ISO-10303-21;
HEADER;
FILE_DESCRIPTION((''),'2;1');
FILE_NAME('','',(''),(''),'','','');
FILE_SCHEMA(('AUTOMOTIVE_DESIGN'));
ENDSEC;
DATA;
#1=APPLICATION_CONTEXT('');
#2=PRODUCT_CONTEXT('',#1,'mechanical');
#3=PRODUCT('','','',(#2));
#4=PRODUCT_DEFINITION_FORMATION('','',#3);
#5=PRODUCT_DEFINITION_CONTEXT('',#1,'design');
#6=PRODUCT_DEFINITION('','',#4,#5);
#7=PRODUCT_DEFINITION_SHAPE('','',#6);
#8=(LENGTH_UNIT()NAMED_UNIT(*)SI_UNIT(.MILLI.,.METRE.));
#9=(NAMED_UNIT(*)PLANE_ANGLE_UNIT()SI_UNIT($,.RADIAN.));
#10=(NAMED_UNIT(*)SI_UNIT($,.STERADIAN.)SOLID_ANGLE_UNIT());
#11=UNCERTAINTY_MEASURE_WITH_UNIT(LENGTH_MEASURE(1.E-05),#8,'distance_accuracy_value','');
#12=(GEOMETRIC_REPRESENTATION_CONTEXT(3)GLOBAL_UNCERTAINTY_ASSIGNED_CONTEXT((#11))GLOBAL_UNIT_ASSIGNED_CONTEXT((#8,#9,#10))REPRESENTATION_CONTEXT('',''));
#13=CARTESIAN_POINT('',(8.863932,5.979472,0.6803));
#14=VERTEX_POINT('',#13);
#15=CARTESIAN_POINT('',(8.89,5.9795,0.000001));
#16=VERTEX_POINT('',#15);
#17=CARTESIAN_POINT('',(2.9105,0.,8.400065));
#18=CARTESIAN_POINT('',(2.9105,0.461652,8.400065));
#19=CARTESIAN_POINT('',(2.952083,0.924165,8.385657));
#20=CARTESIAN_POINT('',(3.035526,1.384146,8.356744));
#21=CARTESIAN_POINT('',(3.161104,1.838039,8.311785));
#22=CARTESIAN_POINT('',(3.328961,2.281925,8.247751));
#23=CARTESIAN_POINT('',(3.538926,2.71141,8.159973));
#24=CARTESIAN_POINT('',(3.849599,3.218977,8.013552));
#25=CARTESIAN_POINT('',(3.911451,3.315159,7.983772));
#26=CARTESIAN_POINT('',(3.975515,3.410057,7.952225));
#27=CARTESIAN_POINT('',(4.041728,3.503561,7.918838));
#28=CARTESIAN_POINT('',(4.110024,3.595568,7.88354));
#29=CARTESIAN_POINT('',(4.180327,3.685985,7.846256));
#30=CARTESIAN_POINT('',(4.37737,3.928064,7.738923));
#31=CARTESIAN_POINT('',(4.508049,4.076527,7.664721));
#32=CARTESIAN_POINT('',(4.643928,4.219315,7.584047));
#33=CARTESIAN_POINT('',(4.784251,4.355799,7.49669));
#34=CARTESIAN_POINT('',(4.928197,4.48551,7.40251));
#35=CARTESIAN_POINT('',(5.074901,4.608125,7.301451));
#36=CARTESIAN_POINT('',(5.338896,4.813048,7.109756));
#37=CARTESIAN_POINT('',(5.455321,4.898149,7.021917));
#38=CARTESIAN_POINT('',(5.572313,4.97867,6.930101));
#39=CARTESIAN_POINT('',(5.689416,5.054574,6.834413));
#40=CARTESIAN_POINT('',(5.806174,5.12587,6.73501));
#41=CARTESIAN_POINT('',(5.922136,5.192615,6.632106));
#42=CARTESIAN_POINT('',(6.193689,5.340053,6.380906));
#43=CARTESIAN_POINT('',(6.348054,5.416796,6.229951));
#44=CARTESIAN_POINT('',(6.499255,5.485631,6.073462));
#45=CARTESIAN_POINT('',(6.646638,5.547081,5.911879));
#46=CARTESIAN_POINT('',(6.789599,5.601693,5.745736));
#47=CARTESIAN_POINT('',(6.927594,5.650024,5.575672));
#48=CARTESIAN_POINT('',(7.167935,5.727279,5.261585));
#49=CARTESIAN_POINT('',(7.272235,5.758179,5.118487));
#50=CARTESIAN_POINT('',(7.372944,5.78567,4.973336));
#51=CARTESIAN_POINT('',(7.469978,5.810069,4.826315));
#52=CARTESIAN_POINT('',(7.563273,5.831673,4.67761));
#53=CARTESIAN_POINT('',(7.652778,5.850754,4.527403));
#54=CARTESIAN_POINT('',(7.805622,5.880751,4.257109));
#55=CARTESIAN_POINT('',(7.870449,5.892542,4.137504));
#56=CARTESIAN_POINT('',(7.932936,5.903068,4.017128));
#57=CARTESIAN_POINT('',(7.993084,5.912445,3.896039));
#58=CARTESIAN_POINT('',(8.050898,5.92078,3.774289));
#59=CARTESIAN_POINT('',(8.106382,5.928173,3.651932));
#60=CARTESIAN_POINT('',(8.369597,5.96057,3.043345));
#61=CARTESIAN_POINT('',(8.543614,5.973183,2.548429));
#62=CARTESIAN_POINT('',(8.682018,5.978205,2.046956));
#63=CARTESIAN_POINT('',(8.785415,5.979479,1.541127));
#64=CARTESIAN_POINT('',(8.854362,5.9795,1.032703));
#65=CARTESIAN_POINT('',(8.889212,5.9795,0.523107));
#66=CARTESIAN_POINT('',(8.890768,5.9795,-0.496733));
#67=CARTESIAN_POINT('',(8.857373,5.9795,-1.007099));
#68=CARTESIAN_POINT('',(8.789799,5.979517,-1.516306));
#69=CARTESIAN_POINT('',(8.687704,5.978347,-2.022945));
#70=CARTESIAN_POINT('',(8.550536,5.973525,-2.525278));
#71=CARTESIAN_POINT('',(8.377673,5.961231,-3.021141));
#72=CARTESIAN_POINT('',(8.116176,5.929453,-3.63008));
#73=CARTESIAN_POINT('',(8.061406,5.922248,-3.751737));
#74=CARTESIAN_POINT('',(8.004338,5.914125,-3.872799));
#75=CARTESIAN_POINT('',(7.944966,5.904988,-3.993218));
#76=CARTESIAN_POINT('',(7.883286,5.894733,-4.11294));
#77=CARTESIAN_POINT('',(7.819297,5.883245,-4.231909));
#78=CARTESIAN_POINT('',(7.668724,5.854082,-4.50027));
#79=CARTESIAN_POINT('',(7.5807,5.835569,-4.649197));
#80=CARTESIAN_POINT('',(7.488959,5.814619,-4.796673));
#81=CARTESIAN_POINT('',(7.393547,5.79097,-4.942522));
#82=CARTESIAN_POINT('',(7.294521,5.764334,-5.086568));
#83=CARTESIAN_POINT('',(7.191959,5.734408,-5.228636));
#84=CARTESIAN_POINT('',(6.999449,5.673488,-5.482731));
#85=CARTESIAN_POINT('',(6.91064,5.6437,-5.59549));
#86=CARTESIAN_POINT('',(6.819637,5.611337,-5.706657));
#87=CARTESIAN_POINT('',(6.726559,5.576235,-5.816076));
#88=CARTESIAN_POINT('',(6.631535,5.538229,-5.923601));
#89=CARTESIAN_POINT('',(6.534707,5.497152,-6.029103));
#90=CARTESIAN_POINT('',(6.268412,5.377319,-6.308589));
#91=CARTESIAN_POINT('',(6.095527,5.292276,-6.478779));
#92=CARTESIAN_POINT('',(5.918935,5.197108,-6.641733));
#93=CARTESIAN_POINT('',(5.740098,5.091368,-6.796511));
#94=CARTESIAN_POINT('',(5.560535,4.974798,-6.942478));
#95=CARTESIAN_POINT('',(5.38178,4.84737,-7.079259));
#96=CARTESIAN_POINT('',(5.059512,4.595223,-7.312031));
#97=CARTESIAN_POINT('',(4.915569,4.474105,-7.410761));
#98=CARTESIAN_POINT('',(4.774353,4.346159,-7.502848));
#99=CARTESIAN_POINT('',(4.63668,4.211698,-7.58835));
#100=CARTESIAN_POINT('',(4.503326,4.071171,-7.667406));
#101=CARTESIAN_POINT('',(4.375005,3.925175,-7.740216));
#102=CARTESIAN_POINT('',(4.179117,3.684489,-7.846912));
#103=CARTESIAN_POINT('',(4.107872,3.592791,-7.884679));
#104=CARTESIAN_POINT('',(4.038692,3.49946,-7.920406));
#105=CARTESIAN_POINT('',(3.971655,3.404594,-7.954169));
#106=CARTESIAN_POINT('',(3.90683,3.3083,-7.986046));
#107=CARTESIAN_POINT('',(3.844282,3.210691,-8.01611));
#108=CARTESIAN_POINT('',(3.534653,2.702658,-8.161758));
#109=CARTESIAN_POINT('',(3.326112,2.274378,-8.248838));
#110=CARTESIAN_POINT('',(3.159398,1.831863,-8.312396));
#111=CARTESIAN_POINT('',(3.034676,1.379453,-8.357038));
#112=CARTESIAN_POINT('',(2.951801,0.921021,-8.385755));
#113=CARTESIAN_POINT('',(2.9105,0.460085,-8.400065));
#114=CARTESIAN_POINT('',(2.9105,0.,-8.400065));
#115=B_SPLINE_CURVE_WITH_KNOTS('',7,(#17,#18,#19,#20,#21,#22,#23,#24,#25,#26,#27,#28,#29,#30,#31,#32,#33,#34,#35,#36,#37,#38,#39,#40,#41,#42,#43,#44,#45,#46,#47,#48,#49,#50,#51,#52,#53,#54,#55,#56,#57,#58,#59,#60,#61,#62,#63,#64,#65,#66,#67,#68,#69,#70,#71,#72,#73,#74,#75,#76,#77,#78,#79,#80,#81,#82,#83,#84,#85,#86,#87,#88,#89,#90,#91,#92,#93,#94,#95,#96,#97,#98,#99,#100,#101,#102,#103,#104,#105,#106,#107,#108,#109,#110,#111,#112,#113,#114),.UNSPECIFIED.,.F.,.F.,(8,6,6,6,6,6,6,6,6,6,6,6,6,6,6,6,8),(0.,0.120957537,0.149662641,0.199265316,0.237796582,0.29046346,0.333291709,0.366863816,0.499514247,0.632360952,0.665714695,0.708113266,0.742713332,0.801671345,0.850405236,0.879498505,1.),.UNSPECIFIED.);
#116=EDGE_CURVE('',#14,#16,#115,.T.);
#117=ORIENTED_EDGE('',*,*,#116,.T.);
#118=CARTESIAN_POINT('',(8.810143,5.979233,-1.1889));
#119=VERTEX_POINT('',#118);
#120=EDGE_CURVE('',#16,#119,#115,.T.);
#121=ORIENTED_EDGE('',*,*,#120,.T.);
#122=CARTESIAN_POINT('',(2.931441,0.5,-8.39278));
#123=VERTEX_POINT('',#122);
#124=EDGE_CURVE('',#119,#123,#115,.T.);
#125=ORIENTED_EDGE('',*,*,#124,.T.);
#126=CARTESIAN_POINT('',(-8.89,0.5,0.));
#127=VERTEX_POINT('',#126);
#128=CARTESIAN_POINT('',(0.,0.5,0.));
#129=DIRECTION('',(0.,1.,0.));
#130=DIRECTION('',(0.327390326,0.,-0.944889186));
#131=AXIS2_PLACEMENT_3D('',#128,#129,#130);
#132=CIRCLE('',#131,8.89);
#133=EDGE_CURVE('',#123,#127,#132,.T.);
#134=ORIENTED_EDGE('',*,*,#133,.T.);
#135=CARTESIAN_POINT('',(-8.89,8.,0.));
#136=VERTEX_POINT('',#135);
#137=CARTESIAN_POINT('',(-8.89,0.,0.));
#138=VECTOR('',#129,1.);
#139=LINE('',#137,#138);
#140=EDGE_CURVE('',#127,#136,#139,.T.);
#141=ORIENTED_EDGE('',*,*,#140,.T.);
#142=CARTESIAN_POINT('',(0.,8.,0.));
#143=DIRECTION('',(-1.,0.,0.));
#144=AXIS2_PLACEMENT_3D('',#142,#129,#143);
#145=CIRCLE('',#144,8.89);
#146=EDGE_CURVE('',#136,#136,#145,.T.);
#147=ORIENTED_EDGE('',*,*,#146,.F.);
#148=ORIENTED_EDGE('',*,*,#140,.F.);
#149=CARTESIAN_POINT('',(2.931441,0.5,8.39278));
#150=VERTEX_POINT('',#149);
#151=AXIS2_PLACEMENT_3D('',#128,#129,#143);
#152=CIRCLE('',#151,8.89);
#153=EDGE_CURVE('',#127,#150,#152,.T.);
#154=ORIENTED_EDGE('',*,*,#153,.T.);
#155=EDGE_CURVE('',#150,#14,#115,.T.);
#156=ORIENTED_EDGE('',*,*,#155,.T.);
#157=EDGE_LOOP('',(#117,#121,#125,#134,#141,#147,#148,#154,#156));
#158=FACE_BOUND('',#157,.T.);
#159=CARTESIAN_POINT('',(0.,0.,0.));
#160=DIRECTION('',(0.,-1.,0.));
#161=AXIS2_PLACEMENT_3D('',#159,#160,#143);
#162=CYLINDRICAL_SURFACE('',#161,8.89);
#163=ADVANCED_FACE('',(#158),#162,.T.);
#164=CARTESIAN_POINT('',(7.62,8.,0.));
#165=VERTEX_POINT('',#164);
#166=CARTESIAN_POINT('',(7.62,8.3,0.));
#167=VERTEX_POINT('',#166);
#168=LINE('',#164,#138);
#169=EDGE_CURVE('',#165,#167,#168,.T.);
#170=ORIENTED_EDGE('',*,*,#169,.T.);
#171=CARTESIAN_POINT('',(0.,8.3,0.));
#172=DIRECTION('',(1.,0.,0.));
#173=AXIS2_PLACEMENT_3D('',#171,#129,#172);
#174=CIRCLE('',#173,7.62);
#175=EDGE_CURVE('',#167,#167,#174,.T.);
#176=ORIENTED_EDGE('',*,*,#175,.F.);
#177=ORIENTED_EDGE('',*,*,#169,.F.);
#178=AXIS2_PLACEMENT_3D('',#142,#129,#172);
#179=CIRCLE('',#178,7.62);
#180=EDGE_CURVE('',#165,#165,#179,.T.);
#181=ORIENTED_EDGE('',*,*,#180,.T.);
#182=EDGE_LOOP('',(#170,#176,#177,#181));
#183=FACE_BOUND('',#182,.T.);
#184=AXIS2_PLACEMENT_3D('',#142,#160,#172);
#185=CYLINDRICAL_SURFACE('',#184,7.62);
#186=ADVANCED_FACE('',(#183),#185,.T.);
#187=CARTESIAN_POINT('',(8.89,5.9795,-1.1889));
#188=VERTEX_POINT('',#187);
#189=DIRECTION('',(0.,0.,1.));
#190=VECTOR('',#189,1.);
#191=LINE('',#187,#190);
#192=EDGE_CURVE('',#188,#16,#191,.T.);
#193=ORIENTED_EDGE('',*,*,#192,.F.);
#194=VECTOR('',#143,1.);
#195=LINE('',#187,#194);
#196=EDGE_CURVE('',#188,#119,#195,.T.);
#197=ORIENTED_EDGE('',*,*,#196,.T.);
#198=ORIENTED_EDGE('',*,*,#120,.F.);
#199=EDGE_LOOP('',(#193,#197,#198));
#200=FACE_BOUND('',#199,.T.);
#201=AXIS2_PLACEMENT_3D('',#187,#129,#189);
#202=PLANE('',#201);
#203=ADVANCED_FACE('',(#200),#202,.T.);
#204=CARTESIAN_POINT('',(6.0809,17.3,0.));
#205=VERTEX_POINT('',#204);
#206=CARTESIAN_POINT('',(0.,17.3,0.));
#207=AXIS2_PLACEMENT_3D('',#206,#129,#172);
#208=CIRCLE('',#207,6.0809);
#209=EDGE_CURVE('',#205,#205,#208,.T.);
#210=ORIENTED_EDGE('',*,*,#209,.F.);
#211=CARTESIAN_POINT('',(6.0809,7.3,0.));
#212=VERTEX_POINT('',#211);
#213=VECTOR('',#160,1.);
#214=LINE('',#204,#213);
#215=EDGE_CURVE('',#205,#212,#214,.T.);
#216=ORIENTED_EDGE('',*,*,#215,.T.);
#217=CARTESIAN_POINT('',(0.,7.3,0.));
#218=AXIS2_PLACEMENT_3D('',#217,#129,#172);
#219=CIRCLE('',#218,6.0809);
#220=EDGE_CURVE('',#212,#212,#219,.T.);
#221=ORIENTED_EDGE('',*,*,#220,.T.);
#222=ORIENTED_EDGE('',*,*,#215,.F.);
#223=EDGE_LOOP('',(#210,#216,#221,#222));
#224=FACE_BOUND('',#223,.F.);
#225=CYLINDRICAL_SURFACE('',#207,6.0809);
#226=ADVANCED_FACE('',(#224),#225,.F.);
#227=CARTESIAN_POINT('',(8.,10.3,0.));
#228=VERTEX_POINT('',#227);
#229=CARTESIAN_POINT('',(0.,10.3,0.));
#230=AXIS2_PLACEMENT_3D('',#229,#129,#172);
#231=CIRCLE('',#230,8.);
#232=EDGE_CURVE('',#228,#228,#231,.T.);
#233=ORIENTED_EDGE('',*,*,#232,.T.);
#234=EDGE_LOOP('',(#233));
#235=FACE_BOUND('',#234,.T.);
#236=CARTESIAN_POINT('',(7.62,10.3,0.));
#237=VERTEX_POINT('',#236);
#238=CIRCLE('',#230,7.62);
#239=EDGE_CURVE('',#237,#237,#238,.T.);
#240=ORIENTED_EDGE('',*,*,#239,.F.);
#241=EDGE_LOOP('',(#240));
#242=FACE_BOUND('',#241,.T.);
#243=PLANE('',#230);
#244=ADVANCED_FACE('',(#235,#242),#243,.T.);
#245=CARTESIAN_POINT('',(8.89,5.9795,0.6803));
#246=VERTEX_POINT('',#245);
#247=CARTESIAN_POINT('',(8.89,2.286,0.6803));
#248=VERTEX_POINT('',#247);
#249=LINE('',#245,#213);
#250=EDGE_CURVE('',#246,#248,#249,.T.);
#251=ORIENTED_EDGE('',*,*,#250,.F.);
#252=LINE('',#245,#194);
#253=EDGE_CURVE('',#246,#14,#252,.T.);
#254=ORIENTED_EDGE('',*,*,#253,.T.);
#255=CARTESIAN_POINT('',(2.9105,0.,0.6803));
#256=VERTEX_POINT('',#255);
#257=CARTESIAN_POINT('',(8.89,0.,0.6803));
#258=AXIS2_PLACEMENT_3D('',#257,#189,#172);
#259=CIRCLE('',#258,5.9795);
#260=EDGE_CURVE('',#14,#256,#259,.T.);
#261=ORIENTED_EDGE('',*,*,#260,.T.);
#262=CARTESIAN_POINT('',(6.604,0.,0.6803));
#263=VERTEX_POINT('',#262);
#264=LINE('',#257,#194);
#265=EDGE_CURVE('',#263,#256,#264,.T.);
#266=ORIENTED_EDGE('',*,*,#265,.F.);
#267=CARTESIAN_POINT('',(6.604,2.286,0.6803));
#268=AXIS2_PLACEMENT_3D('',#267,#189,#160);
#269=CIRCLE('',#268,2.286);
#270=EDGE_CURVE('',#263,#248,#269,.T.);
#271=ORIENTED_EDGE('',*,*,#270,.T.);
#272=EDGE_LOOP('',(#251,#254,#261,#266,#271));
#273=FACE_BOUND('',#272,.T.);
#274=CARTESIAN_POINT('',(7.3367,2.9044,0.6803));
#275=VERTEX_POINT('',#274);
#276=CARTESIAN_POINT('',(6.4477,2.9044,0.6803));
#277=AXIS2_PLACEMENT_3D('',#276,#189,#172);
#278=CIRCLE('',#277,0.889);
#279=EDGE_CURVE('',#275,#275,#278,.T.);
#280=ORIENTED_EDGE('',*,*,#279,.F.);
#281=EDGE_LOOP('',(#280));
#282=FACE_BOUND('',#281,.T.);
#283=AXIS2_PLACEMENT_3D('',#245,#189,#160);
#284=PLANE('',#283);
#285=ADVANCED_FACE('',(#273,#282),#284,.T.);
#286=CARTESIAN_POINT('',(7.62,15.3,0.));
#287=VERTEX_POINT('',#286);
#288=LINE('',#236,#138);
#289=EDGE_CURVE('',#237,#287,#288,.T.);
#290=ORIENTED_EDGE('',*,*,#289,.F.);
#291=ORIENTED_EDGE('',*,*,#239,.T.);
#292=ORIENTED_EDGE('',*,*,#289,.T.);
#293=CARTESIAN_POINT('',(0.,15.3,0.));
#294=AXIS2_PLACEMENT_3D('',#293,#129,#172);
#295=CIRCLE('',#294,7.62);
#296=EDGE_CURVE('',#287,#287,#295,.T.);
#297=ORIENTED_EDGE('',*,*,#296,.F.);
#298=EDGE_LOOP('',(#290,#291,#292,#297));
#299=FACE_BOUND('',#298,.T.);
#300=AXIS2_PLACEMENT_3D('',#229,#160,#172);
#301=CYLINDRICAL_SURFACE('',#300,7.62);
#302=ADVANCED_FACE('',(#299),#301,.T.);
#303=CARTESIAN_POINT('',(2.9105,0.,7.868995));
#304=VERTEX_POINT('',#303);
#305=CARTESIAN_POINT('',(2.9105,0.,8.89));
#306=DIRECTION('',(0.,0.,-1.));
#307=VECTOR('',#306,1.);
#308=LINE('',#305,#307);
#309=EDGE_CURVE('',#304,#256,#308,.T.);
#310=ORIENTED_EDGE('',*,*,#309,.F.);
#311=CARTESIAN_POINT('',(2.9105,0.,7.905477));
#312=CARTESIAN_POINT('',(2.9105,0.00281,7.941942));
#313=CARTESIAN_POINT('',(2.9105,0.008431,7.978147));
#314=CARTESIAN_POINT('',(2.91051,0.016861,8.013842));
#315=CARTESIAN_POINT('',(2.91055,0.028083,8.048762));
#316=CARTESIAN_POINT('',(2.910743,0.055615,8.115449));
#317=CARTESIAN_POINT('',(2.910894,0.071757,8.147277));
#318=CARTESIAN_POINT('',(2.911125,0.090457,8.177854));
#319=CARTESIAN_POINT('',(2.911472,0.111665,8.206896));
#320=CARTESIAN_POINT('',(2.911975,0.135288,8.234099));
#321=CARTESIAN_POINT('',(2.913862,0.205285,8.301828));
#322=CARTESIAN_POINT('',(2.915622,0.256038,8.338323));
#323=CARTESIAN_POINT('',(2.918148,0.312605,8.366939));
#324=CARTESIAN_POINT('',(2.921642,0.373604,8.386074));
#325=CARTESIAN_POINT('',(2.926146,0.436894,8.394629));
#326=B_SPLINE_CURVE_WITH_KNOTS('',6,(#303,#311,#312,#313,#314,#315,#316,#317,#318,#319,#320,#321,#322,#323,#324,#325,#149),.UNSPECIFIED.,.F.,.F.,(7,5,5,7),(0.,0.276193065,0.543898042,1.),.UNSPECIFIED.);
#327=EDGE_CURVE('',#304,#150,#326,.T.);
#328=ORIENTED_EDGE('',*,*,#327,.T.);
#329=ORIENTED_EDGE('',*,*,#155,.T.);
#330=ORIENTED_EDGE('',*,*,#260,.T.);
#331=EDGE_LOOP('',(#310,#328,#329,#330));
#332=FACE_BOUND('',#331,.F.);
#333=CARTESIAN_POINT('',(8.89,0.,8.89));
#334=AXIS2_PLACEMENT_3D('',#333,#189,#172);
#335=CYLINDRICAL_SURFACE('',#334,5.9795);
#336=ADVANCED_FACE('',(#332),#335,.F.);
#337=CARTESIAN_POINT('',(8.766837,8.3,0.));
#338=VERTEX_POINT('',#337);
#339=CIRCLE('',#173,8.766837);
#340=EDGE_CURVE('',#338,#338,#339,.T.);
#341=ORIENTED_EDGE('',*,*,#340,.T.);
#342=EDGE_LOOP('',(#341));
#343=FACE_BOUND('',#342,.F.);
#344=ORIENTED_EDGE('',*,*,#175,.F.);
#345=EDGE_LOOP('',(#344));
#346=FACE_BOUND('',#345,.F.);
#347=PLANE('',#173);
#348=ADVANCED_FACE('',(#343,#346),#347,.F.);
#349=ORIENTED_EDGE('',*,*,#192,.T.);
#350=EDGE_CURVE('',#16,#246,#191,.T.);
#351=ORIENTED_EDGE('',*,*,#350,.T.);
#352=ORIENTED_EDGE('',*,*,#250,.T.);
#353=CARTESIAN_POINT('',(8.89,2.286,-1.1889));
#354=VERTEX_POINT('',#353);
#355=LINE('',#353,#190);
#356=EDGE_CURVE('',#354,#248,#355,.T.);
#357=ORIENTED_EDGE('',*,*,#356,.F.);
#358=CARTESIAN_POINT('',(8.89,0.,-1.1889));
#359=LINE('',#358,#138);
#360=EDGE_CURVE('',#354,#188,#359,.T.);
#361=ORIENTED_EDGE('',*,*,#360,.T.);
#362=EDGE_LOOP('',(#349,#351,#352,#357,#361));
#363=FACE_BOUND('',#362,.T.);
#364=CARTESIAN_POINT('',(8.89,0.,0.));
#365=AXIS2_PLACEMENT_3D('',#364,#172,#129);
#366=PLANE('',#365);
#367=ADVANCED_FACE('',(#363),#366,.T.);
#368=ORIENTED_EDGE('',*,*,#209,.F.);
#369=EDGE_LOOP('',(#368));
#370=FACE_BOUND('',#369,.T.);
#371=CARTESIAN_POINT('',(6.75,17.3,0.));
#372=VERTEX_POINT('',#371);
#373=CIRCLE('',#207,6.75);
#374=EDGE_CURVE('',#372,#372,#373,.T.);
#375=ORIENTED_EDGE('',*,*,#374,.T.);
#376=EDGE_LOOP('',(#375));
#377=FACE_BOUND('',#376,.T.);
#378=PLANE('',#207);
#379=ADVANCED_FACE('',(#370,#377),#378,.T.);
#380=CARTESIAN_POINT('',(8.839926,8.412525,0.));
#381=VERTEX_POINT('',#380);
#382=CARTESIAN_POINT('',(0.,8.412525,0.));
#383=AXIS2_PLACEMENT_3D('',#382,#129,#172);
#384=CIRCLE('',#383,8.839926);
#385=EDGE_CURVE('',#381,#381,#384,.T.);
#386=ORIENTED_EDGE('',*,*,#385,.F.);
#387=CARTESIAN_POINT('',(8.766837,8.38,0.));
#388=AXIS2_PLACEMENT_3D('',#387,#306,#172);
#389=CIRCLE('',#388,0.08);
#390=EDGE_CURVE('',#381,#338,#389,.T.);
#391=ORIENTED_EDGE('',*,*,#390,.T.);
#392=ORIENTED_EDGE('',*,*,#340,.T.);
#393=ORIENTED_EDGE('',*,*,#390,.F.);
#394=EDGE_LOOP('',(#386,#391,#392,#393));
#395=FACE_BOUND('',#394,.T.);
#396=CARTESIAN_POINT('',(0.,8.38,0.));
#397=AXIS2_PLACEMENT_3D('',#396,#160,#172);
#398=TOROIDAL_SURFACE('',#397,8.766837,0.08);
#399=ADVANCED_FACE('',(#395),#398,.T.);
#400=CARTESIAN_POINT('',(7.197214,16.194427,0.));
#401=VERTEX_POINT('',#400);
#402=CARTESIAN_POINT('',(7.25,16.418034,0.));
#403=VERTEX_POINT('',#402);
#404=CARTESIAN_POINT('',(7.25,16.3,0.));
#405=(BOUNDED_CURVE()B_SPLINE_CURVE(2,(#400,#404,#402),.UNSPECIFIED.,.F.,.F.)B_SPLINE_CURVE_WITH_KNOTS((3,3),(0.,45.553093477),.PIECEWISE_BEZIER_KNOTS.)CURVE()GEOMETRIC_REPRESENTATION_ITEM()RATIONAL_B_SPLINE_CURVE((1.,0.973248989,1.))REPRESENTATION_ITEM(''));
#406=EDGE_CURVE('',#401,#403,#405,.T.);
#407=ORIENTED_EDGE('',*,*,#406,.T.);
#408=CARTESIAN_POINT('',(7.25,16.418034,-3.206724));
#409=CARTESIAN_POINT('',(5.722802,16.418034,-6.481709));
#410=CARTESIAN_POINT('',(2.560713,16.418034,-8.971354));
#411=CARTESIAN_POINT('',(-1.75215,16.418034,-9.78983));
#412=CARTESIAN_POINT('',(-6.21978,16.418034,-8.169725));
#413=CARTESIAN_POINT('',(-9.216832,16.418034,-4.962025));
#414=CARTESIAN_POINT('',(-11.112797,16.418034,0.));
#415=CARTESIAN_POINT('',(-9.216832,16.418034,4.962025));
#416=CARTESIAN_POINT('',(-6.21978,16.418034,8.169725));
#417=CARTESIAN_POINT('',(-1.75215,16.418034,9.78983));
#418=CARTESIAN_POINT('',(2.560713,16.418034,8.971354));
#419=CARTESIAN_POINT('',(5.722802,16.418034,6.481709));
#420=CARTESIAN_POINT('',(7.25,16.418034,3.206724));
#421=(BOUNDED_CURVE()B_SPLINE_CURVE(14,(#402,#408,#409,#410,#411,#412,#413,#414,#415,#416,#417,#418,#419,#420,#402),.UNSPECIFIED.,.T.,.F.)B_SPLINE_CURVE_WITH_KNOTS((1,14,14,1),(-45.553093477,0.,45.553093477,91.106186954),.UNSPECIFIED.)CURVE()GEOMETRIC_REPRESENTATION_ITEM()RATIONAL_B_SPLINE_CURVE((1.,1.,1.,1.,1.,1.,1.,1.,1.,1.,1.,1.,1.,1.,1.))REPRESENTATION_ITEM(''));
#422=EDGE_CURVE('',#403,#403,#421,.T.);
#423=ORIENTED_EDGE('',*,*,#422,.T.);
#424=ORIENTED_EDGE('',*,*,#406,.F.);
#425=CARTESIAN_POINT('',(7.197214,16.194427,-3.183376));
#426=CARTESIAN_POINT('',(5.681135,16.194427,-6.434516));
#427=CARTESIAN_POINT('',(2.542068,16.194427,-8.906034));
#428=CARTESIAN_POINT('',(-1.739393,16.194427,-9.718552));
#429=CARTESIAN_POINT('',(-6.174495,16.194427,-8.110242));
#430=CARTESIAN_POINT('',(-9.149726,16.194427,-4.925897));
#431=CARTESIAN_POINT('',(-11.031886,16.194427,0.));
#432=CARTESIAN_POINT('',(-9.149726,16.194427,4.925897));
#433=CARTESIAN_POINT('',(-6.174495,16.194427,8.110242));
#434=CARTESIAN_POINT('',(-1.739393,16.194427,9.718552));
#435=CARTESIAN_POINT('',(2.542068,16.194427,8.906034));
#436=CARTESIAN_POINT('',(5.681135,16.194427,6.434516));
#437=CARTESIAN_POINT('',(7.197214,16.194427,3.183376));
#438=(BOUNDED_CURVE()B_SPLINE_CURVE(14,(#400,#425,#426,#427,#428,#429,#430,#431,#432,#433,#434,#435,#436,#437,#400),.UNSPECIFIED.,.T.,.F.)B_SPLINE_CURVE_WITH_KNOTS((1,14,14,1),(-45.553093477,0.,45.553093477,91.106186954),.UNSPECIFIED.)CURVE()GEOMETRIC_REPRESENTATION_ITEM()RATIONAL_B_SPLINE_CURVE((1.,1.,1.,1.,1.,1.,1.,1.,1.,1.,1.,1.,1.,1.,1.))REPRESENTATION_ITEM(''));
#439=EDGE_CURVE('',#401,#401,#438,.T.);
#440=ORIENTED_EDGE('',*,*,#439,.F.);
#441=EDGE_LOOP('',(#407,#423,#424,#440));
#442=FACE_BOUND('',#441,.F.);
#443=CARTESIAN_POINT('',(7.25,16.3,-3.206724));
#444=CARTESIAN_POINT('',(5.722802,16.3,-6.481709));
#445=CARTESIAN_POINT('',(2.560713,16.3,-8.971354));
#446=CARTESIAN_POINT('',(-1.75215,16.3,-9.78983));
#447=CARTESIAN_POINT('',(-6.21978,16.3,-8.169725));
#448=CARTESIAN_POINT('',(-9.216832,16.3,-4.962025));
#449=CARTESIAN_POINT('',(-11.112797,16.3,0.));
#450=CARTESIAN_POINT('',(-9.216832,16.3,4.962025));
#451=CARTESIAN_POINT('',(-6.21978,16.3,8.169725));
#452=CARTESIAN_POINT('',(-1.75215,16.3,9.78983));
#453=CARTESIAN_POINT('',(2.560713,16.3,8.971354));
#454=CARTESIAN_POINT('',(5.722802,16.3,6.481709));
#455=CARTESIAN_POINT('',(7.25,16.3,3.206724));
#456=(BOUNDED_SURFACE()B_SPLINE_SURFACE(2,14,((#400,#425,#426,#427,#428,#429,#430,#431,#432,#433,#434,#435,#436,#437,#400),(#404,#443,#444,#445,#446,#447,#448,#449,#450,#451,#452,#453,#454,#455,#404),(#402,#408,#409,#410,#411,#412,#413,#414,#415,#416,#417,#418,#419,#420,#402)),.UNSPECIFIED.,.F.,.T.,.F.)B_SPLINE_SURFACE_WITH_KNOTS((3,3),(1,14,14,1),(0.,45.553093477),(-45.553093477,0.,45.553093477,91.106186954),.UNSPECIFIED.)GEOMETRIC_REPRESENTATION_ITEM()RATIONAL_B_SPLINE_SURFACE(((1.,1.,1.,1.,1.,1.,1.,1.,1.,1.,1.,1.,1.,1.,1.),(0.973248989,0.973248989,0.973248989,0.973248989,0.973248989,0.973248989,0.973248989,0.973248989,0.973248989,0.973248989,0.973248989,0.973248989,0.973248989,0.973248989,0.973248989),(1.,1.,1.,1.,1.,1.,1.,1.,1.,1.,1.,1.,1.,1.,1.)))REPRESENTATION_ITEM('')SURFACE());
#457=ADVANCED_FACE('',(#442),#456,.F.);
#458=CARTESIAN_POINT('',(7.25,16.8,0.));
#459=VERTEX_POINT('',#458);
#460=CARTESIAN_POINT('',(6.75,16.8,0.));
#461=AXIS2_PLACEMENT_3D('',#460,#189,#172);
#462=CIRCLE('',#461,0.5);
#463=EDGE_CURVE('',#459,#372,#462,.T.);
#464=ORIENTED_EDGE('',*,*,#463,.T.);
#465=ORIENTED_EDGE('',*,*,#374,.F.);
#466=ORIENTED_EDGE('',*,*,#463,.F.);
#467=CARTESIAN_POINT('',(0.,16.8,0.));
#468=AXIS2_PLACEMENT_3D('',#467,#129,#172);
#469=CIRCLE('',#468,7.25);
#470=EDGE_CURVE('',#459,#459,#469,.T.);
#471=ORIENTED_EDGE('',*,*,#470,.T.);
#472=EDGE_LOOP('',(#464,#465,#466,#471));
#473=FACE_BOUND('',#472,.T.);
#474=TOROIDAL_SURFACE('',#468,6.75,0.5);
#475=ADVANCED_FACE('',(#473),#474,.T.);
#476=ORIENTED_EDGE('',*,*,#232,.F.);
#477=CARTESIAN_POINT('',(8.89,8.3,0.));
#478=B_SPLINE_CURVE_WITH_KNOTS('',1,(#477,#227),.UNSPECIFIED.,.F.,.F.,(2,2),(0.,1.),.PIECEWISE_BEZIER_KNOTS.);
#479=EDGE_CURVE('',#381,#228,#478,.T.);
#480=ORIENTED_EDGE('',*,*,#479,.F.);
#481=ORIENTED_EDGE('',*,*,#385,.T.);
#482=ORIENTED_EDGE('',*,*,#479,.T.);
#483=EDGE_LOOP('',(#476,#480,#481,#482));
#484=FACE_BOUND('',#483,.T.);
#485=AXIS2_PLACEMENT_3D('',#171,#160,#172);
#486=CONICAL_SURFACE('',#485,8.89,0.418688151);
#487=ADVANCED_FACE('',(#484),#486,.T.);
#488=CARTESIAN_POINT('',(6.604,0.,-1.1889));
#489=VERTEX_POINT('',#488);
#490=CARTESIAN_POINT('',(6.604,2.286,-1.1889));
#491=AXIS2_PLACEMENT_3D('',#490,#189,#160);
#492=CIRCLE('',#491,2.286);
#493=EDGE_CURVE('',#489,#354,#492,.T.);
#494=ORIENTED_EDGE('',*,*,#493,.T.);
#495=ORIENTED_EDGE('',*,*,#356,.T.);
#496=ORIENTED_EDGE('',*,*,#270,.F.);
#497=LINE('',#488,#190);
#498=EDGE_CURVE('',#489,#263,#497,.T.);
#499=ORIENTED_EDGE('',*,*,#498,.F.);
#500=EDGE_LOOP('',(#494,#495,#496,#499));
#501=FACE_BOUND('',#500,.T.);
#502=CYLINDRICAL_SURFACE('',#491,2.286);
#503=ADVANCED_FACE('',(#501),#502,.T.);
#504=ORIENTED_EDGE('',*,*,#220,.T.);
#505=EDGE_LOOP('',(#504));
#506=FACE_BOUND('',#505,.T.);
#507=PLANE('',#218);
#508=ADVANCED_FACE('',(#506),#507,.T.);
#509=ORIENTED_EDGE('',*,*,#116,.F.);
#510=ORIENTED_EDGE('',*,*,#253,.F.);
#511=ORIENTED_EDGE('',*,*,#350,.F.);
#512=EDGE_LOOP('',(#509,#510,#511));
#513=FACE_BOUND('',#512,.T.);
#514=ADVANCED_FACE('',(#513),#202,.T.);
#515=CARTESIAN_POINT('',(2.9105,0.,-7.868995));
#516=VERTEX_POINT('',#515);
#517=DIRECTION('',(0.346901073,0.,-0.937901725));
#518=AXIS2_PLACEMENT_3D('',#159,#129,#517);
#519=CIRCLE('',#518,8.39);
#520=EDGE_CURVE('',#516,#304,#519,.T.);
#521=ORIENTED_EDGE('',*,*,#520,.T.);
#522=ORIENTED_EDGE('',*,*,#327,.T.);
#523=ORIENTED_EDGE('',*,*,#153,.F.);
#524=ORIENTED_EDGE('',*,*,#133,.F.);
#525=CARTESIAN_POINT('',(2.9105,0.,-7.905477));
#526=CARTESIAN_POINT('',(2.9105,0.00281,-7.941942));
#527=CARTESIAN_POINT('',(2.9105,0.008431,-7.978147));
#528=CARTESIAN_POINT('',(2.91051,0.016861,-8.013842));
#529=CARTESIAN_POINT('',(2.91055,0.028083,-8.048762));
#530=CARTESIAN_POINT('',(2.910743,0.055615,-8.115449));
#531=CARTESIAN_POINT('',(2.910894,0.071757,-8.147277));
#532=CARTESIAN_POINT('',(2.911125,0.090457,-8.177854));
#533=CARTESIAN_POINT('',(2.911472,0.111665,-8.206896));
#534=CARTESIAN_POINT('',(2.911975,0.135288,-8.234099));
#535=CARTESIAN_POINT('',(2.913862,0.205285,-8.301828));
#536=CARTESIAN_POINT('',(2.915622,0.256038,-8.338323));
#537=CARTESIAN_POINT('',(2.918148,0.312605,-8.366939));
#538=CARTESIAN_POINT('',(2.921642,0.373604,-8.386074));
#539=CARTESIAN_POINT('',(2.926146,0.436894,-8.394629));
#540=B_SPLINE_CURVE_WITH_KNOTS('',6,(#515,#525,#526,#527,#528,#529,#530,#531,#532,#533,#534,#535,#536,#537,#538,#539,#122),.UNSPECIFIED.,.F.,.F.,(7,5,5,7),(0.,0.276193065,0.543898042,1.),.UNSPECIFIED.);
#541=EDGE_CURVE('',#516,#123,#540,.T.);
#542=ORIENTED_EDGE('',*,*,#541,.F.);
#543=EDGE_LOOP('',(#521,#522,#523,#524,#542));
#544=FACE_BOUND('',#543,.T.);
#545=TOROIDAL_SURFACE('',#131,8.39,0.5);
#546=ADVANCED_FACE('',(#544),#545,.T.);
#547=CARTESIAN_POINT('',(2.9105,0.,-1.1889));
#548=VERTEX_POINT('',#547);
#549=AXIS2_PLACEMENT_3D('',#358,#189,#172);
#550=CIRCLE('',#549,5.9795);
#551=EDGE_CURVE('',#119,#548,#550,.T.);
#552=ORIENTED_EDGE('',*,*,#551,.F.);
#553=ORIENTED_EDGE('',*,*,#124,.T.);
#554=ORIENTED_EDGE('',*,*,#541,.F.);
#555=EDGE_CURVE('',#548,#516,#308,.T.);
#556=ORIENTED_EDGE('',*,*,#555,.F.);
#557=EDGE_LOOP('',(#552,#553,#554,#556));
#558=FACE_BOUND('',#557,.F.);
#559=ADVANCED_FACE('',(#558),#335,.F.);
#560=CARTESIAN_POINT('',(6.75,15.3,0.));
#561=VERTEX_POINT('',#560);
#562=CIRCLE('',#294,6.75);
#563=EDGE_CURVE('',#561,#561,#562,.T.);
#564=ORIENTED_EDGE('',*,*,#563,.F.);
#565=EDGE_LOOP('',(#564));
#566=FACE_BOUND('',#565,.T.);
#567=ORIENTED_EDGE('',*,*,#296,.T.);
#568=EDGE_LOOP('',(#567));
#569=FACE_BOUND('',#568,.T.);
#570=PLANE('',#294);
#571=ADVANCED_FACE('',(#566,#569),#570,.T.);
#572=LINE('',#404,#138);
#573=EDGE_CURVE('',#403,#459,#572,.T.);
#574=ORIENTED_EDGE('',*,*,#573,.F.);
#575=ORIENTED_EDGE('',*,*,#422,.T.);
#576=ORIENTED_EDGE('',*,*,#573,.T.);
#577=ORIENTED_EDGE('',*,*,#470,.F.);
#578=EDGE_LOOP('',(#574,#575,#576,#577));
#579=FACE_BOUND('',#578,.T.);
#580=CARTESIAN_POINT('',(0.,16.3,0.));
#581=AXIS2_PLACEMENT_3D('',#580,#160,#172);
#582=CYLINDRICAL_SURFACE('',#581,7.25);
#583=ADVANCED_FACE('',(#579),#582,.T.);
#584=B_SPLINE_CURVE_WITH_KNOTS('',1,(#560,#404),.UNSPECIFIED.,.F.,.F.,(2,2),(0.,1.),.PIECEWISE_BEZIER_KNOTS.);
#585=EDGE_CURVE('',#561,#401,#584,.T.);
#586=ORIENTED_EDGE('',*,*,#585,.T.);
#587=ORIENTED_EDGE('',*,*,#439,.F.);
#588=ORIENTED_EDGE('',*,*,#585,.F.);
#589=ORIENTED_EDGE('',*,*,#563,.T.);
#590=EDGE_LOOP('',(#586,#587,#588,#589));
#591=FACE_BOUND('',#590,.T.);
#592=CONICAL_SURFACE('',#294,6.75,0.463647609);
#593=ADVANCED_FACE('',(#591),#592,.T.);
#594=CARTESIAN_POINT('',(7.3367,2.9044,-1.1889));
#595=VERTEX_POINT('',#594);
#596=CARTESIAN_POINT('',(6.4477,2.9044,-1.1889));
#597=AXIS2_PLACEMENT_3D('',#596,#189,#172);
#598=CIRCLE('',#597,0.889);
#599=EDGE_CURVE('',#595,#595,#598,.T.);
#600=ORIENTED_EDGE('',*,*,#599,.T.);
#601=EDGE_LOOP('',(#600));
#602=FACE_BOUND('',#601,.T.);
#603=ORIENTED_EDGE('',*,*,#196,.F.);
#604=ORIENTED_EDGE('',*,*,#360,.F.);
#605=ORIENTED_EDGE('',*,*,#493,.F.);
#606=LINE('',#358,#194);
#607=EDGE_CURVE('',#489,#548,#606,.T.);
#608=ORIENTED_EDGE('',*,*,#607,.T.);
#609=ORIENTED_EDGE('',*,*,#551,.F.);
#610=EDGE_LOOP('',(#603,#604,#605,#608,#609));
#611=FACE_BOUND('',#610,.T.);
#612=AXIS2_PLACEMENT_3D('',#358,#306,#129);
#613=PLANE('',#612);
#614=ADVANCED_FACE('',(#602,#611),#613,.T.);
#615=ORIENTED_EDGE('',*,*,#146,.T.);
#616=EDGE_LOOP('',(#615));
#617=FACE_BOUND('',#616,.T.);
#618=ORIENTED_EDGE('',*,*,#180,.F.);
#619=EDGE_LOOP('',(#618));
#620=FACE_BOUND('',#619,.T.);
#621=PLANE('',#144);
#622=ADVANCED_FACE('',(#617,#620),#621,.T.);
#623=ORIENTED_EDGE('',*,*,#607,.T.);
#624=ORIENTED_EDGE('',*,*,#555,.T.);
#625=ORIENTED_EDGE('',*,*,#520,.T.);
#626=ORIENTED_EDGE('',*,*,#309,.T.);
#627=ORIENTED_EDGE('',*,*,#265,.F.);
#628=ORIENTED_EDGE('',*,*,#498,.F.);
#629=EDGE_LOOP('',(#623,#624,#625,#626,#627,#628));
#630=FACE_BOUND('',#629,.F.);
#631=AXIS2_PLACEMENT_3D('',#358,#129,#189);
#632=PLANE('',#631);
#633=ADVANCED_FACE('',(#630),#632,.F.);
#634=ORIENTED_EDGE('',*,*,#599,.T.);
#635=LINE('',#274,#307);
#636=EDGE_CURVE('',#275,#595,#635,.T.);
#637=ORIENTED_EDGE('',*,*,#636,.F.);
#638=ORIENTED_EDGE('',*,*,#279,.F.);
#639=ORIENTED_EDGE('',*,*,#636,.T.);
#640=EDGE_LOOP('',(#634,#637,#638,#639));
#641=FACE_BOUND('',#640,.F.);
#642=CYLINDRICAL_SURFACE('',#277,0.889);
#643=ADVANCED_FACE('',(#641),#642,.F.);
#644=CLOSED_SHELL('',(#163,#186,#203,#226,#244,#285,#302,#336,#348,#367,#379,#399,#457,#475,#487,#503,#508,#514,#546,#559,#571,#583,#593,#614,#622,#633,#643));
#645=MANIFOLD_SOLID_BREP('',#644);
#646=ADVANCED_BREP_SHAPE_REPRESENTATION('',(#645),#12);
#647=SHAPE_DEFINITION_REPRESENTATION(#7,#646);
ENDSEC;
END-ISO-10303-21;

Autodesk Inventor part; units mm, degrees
sketch "Sketch1" plane through (0, 0, 0) normal (0, 1, 0) x (-1, 0, 0)
  circle A0 centre (0, 0) radius 8.89
  dimension "d0" = 17.78
extrude "Extrusion1" add sketch "Sketch1" along normal blind 8
sketch "Sketch2" plane through (0, 8, 0) normal (0, 1, 0) x (1, 0, 0)
  circle A0 centre (0, 0) radius 7.62
  dimension "d3" = 15.24
extrude "Extrusion2" add sketch "Sketch2" along normal blind 0.3
ref_plane "Work Plane1" through (0, 10.3, 0) normal (0, 1, 0) x (1, 0, 0)
sketch "Sketch4" plane through (0, 10.3, 0) normal (0, 1, 0) x (1, 0, 0)
  circle A0 centre (0, 0) radius 8
  dimension "d7" = 16
sketch "Sketch5" plane through (0, 8.3, 0) normal (0, 1, 0) x (1, 0, 0)
  circle A0 centre (0, 0) radius 8.89
  dimension "d8" = 17.78
loft "Loft1" add profiles "Sketch5", "Sketch4"
sketch "Sketch6" plane through (0, 10.3, 0) normal (0, 1, 0) x (1, 0, 0)
  circle A0 centre (0, 0) radius 7.62
  dimension "d13" = 15.24
extrude "Extrusion3" add sketch "Sketch6" along normal blind 5
sketch "Sketch7" plane through (0, 15.3, 0) normal (0, 1, 0) x (1, 0, 0)
  circle A0 centre (0, 0) radius 6.75
  dimension "d16" = 13.5
ref_plane "Work Plane2" through (0, 16.3, 0) normal (0, 1, 0) x (1, 0, 0)
sketch "Sketch8" plane through (0, 16.3, 0) normal (0, 1, 0) x (1, 0, 0)
  circle A0 centre (0, 0) radius 7.25
  dimension "d18" = 14.5
loft "Loft2" add profiles "Sketch7", "Sketch8"
fillet "Fillet1" radius 0.08 1 edges at (-8.89, 8.3, 0)
thread "Thread1" size "0.390-27 UNS" class "2A" standard "ANSI Unified Screw Threads" length 8.001
sketch "Sketch9" plane through (0, 16.3, 0) normal (0, 1, 0) x (1, 0, 0)
  circle A0 centre (0, 0) radius 7.25
extrude "Extrusion4" add sketch "Sketch9" along normal blind 1
ref_plane "Work Plane3" through (0, 0, 8.89) normal (0, 0, 1) x (1, 0, 0)
sketch "Sketch10" plane through (0, 0, 8.89) normal (0, 0, 1) x (1, 0, 0)
  line L0 (8.89, 0) -> (-8.89, 0) projected
  circle A0 centre (8.89, 0) radius 5.9795
  point P0 (0, 0)
extrude "Extrusion5" cut sketch "Sketch10" against normal blind 80
ref_plane "Work Plane4" through (8.89, 0, 0) normal (1, 0, 0) x (0, 1, 0)
sketch "Sketch11" plane through (8.89, 0, 0) normal (1, 0, 0) x (0, 1, 0)
  line L0 (0, -8.89) -> (0, 8.89) projected
  line L1 (5.9795, 0.6803) -> (0, 0.6803)
  line L2 (0, 0.6803) -> (0, -1.1889)
  line L3 (0, -1.1889) -> (5.9795, -1.1889)
  line L4 (5.9795, -1.1889) -> (5.9795, 0.6803)
  point P0 (0, 0)
  point P1 (0, -8.4001)
  point P2 (0, 8.4001)
extrude "Extrusion6" add sketch "Sketch11" against normal up to surface
sketch "Sketch12" plane through (8.89, 0, 0.6803) normal (0, 0, 1) x (1, 0, 0)
  circle A0 centre (-2.4423, 2.9044) radius 0.889
  point P0 (-8.89, 0)
  dimension "d34" = 1.778
extrude "Extrusion7" cut sketch "Sketch12" against normal blind 80
fillet "Fillet2" radius 2.286 1 edges at (8.89, 0, -0.2543)
fillet "Fillet3" radius 0.5 2 edges at (-5.1555, 0, 7.2424) (-5.1555, 0, -7.2424)
fillet "Fillet4" radius 0.5 1 edges at (-7.25, 16.3, 0)
fillet "Fillet5" radius 0.5 1 edges at (-7.25, 17.3, 0)
sketch "Sketch13" plane through (0, 17.3, 0) normal (0, 1, 0) x (1, 0, 0)
  circle A0 centre (0, 0) radius 6.0809
extrude "Extrusion8" cut sketch "Sketch13" against normal blind 10
properties part number "Tail Cap"
